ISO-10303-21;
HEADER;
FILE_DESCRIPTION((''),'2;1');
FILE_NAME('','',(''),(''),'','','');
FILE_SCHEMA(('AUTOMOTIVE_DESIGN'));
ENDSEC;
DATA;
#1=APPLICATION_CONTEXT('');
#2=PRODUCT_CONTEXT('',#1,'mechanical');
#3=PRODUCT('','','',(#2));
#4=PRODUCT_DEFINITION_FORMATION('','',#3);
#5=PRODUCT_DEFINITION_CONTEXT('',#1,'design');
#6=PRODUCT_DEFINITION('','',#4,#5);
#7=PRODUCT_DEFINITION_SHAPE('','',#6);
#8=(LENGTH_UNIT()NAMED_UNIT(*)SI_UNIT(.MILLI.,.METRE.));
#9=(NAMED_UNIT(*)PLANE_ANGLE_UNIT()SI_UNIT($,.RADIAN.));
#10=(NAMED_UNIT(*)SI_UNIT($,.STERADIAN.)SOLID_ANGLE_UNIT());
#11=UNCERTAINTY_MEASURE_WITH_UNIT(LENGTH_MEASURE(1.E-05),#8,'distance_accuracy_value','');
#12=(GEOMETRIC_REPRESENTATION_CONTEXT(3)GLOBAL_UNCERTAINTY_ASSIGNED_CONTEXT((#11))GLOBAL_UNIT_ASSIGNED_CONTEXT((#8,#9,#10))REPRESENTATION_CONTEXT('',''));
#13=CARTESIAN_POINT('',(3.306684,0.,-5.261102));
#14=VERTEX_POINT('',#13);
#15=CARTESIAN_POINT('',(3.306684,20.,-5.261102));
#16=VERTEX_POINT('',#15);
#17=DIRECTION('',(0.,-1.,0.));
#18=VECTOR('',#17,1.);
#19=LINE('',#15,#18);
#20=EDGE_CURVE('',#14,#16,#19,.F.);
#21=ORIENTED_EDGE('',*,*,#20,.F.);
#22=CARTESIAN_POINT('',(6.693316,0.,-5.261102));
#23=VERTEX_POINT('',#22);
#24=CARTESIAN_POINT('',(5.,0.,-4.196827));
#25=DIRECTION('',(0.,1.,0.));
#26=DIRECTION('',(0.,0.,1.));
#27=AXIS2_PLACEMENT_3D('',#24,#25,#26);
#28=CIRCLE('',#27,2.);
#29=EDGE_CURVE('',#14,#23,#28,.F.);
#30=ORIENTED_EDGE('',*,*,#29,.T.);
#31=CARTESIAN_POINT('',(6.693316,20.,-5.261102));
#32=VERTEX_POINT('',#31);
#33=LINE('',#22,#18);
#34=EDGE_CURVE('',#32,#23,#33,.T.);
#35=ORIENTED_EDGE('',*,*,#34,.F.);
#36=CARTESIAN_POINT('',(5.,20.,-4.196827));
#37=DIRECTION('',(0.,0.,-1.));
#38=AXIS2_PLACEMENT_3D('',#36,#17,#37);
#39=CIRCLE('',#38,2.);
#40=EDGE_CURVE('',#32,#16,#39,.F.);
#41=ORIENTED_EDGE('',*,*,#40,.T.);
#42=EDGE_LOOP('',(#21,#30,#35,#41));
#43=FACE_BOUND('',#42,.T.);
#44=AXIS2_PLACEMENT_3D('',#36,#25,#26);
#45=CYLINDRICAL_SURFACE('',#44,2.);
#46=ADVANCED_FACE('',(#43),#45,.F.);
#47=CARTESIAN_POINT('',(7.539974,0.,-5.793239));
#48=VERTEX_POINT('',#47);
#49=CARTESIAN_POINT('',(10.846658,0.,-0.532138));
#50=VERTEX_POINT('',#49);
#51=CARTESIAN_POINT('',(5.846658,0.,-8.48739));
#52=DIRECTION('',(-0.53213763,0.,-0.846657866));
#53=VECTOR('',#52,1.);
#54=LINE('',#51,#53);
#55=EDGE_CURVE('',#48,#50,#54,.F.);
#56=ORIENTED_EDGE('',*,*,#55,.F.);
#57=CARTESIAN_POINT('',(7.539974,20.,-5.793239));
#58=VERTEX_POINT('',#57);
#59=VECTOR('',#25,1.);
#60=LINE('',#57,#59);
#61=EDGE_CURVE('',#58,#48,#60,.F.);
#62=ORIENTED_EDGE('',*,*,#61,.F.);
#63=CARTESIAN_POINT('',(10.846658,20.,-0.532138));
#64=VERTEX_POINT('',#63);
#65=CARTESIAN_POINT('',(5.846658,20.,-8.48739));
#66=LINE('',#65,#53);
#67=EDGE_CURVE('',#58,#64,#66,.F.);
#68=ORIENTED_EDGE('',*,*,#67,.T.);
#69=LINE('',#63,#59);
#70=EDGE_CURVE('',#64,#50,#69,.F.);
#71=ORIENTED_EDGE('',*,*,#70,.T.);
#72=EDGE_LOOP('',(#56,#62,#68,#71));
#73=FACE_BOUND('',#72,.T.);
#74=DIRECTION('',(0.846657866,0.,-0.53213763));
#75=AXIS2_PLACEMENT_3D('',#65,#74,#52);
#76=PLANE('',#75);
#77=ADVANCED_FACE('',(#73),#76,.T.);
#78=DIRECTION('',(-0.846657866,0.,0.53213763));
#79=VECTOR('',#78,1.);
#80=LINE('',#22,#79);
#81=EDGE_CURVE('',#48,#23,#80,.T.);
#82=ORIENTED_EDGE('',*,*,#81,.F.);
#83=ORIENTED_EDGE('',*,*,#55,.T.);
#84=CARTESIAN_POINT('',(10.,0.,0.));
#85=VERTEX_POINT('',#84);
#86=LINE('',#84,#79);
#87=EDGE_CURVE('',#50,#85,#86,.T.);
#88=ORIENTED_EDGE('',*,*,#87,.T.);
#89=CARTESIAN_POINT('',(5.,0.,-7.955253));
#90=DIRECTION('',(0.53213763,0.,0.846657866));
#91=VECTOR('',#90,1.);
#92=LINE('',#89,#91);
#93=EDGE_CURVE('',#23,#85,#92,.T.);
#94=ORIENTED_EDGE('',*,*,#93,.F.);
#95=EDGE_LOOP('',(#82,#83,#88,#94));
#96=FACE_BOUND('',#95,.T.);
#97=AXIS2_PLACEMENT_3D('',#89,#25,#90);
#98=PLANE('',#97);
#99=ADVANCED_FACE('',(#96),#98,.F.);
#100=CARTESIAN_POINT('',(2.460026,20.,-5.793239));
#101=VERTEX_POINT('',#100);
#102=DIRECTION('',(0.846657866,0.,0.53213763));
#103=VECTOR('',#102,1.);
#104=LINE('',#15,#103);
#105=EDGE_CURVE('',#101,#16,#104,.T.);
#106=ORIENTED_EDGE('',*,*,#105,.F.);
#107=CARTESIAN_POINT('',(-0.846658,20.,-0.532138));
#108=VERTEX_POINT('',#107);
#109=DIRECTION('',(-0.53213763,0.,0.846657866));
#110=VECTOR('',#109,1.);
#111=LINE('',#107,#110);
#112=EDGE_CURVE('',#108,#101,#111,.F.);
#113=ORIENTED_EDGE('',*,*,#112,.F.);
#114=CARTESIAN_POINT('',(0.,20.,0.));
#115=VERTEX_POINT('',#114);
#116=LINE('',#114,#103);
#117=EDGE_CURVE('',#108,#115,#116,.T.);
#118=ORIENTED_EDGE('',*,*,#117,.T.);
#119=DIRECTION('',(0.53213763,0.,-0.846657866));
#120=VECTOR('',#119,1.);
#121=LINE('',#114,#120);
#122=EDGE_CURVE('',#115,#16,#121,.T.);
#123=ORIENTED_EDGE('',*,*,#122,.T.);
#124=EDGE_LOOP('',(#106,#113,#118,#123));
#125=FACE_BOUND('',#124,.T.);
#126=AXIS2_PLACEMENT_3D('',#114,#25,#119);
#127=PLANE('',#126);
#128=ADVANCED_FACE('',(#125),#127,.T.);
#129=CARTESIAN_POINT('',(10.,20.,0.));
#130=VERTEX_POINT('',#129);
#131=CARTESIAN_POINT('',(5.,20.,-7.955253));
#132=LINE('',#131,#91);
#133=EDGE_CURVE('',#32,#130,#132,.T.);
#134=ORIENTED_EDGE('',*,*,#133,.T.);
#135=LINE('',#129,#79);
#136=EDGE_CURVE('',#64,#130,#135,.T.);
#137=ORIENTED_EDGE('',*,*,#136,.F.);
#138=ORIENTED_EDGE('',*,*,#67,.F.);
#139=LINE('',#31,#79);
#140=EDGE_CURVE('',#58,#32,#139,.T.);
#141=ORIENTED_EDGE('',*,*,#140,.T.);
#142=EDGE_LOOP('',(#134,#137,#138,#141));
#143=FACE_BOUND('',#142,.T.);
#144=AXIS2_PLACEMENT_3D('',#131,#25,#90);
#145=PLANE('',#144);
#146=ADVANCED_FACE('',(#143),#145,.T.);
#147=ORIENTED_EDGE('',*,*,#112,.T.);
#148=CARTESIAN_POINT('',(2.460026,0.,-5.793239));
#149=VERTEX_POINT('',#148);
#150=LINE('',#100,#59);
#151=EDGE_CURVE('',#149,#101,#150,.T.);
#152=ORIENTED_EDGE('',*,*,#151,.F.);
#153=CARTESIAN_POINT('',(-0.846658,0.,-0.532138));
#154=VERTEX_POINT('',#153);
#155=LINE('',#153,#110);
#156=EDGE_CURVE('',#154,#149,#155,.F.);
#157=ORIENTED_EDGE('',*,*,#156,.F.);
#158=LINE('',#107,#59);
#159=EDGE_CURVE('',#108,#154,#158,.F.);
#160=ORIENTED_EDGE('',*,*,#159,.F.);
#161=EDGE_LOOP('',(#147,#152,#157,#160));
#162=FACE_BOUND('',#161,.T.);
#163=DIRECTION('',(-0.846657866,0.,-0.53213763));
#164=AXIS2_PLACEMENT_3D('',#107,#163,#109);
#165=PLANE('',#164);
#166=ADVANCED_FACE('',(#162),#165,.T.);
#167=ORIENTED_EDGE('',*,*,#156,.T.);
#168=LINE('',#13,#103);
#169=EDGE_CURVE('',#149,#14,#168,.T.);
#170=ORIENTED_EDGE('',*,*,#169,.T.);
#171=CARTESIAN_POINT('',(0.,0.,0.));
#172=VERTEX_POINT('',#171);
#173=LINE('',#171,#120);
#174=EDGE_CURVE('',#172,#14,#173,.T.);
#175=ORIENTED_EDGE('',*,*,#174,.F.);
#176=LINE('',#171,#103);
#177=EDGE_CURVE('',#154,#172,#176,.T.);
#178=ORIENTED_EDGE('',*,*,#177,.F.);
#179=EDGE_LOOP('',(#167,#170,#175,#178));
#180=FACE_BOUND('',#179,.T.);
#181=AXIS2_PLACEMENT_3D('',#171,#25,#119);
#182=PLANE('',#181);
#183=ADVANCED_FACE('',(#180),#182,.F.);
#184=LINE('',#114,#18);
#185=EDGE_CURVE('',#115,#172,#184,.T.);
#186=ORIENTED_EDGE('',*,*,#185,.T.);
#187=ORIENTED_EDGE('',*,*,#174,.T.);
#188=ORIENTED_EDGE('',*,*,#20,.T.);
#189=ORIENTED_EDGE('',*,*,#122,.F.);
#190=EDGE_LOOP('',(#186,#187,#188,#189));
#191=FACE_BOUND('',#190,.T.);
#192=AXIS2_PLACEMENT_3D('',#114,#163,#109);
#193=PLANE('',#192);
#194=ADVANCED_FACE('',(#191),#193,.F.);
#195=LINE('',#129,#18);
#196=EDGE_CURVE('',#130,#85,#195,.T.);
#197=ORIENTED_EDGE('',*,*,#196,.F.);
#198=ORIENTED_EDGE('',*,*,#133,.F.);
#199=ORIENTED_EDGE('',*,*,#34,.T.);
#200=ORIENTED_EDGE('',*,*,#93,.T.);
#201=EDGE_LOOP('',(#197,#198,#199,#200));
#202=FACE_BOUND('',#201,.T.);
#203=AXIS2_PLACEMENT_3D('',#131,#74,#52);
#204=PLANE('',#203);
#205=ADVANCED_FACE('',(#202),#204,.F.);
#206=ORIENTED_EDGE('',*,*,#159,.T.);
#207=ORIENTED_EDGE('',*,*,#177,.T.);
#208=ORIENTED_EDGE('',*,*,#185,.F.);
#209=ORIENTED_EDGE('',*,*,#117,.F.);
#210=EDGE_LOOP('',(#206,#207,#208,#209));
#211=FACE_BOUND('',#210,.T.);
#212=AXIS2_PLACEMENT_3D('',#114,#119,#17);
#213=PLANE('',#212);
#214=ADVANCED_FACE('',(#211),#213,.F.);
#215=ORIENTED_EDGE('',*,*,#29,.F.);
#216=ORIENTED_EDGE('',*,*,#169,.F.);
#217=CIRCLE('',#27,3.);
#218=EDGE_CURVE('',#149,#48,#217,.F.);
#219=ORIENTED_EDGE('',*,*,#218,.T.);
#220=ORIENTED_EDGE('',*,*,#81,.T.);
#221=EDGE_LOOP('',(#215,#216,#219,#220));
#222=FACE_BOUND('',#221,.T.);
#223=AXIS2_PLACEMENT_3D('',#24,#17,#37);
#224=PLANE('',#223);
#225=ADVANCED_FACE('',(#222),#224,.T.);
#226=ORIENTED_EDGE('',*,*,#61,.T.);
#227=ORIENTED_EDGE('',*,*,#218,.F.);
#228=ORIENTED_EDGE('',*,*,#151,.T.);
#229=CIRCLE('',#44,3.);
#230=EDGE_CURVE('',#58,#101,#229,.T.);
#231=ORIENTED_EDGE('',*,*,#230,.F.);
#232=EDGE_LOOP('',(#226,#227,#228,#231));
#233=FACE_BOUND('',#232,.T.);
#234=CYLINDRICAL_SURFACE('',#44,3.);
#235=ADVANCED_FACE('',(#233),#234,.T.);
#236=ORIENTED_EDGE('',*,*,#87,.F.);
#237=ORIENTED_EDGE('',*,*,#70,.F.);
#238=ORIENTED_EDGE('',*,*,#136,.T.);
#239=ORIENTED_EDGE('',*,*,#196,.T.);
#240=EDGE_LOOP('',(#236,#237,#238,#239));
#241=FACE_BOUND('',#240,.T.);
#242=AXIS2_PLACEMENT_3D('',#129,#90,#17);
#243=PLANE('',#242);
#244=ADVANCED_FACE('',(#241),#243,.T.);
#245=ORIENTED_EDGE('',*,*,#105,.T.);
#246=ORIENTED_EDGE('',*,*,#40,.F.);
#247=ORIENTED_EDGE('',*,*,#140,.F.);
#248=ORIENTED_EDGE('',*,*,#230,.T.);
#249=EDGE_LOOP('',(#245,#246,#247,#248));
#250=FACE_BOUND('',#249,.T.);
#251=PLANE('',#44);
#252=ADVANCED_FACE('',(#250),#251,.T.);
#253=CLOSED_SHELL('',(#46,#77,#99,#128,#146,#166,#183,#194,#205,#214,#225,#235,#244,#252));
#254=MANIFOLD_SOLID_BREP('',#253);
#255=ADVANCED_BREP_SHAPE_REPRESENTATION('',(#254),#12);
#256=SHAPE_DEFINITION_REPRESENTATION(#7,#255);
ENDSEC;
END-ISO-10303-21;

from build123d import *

# Parameters (mm, degrees)
BOSS_EXTRUDE1_DEPTH    = 20
CONVERT_SOLID1_DEPTH   = 20
CONVERT_SOLID1_2_DEPTH = 20


# Read off the part's stored shape, not the designer's step: Convert-Solid1
with BuildPart() as part:
    # Sketch1 → Boss-Extrude1 (new body)
    with BuildSketch(Plane(origin=(0, 0, 0), x_dir=(1, 0, 0), z_dir=(0, 1, 0))):
        Polygon((0, 0), (5, 7.955252718), (10, 0), (11.693315732, 1.064275261), (5, 11.713678895), (-1.693315732, 1.064275261), align=None)
    extrude(amount=BOSS_EXTRUDE1_DEPTH)

    # Convert-Solid1 outline → Convert-Solid1 (cut)
    with BuildSketch(Plane(origin=(0, 0, 0), x_dir=(1, 0, 0), z_dir=(0, 1, 0))):
        with BuildLine():
            Line((5, 7.955252718), (5.503419817, 7.154286344))
            ThreePointArc((5.503419817, 7.154286344), (6.666935225, 6.69108534), (7.539973598, 5.793239432))
            Line((7.539973598, 5.793239432), (10.846657866, 0.53213763))
            Line((10.846657866, 0.53213763), (11.693315732, 1.064275261))
            Line((11.693315732, 1.064275261), (5, 11.713678895))
            Line((5, 11.713678895), (-1.693315732, 1.064275261))
            Line((-1.693315732, 1.064275261), (-0.846657866, 0.53213763))
            Line((-0.846657866, 0.53213763), (2.460026402, 5.793239432))
            ThreePointArc((2.460026402, 5.793239432), (3.333064775, 6.69108534), (4.496580183, 7.154286344))
            Line((4.496580183, 7.154286344), (5, 7.955252718))
        make_face()
    extrude(amount=CONVERT_SOLID1_DEPTH, mode=Mode.SUBTRACT)

    # Convert-Solid1 2 outline → Convert-Solid1 2 (add)
    with BuildSketch(Plane(origin=(0, 0, 0), x_dir=(1, 0, 0), z_dir=(0, 1, 0))):
        with BuildLine():
            ThreePointArc((3.306684268, 5.261101802), (5, 6.196826541), (6.693315732, 5.261101802))
            Line((6.693315732, 5.261101802), (5.503419817, 7.154286344))
            ThreePointArc((5.503419817, 7.154286344), (5, 7.196826541), (4.496580183, 7.154286344))
            Line((4.496580183, 7.154286344), (3.306684268, 5.261101802))
        make_face()
    extrude(amount=CONVERT_SOLID1_2_DEPTH)


solid = part.part
